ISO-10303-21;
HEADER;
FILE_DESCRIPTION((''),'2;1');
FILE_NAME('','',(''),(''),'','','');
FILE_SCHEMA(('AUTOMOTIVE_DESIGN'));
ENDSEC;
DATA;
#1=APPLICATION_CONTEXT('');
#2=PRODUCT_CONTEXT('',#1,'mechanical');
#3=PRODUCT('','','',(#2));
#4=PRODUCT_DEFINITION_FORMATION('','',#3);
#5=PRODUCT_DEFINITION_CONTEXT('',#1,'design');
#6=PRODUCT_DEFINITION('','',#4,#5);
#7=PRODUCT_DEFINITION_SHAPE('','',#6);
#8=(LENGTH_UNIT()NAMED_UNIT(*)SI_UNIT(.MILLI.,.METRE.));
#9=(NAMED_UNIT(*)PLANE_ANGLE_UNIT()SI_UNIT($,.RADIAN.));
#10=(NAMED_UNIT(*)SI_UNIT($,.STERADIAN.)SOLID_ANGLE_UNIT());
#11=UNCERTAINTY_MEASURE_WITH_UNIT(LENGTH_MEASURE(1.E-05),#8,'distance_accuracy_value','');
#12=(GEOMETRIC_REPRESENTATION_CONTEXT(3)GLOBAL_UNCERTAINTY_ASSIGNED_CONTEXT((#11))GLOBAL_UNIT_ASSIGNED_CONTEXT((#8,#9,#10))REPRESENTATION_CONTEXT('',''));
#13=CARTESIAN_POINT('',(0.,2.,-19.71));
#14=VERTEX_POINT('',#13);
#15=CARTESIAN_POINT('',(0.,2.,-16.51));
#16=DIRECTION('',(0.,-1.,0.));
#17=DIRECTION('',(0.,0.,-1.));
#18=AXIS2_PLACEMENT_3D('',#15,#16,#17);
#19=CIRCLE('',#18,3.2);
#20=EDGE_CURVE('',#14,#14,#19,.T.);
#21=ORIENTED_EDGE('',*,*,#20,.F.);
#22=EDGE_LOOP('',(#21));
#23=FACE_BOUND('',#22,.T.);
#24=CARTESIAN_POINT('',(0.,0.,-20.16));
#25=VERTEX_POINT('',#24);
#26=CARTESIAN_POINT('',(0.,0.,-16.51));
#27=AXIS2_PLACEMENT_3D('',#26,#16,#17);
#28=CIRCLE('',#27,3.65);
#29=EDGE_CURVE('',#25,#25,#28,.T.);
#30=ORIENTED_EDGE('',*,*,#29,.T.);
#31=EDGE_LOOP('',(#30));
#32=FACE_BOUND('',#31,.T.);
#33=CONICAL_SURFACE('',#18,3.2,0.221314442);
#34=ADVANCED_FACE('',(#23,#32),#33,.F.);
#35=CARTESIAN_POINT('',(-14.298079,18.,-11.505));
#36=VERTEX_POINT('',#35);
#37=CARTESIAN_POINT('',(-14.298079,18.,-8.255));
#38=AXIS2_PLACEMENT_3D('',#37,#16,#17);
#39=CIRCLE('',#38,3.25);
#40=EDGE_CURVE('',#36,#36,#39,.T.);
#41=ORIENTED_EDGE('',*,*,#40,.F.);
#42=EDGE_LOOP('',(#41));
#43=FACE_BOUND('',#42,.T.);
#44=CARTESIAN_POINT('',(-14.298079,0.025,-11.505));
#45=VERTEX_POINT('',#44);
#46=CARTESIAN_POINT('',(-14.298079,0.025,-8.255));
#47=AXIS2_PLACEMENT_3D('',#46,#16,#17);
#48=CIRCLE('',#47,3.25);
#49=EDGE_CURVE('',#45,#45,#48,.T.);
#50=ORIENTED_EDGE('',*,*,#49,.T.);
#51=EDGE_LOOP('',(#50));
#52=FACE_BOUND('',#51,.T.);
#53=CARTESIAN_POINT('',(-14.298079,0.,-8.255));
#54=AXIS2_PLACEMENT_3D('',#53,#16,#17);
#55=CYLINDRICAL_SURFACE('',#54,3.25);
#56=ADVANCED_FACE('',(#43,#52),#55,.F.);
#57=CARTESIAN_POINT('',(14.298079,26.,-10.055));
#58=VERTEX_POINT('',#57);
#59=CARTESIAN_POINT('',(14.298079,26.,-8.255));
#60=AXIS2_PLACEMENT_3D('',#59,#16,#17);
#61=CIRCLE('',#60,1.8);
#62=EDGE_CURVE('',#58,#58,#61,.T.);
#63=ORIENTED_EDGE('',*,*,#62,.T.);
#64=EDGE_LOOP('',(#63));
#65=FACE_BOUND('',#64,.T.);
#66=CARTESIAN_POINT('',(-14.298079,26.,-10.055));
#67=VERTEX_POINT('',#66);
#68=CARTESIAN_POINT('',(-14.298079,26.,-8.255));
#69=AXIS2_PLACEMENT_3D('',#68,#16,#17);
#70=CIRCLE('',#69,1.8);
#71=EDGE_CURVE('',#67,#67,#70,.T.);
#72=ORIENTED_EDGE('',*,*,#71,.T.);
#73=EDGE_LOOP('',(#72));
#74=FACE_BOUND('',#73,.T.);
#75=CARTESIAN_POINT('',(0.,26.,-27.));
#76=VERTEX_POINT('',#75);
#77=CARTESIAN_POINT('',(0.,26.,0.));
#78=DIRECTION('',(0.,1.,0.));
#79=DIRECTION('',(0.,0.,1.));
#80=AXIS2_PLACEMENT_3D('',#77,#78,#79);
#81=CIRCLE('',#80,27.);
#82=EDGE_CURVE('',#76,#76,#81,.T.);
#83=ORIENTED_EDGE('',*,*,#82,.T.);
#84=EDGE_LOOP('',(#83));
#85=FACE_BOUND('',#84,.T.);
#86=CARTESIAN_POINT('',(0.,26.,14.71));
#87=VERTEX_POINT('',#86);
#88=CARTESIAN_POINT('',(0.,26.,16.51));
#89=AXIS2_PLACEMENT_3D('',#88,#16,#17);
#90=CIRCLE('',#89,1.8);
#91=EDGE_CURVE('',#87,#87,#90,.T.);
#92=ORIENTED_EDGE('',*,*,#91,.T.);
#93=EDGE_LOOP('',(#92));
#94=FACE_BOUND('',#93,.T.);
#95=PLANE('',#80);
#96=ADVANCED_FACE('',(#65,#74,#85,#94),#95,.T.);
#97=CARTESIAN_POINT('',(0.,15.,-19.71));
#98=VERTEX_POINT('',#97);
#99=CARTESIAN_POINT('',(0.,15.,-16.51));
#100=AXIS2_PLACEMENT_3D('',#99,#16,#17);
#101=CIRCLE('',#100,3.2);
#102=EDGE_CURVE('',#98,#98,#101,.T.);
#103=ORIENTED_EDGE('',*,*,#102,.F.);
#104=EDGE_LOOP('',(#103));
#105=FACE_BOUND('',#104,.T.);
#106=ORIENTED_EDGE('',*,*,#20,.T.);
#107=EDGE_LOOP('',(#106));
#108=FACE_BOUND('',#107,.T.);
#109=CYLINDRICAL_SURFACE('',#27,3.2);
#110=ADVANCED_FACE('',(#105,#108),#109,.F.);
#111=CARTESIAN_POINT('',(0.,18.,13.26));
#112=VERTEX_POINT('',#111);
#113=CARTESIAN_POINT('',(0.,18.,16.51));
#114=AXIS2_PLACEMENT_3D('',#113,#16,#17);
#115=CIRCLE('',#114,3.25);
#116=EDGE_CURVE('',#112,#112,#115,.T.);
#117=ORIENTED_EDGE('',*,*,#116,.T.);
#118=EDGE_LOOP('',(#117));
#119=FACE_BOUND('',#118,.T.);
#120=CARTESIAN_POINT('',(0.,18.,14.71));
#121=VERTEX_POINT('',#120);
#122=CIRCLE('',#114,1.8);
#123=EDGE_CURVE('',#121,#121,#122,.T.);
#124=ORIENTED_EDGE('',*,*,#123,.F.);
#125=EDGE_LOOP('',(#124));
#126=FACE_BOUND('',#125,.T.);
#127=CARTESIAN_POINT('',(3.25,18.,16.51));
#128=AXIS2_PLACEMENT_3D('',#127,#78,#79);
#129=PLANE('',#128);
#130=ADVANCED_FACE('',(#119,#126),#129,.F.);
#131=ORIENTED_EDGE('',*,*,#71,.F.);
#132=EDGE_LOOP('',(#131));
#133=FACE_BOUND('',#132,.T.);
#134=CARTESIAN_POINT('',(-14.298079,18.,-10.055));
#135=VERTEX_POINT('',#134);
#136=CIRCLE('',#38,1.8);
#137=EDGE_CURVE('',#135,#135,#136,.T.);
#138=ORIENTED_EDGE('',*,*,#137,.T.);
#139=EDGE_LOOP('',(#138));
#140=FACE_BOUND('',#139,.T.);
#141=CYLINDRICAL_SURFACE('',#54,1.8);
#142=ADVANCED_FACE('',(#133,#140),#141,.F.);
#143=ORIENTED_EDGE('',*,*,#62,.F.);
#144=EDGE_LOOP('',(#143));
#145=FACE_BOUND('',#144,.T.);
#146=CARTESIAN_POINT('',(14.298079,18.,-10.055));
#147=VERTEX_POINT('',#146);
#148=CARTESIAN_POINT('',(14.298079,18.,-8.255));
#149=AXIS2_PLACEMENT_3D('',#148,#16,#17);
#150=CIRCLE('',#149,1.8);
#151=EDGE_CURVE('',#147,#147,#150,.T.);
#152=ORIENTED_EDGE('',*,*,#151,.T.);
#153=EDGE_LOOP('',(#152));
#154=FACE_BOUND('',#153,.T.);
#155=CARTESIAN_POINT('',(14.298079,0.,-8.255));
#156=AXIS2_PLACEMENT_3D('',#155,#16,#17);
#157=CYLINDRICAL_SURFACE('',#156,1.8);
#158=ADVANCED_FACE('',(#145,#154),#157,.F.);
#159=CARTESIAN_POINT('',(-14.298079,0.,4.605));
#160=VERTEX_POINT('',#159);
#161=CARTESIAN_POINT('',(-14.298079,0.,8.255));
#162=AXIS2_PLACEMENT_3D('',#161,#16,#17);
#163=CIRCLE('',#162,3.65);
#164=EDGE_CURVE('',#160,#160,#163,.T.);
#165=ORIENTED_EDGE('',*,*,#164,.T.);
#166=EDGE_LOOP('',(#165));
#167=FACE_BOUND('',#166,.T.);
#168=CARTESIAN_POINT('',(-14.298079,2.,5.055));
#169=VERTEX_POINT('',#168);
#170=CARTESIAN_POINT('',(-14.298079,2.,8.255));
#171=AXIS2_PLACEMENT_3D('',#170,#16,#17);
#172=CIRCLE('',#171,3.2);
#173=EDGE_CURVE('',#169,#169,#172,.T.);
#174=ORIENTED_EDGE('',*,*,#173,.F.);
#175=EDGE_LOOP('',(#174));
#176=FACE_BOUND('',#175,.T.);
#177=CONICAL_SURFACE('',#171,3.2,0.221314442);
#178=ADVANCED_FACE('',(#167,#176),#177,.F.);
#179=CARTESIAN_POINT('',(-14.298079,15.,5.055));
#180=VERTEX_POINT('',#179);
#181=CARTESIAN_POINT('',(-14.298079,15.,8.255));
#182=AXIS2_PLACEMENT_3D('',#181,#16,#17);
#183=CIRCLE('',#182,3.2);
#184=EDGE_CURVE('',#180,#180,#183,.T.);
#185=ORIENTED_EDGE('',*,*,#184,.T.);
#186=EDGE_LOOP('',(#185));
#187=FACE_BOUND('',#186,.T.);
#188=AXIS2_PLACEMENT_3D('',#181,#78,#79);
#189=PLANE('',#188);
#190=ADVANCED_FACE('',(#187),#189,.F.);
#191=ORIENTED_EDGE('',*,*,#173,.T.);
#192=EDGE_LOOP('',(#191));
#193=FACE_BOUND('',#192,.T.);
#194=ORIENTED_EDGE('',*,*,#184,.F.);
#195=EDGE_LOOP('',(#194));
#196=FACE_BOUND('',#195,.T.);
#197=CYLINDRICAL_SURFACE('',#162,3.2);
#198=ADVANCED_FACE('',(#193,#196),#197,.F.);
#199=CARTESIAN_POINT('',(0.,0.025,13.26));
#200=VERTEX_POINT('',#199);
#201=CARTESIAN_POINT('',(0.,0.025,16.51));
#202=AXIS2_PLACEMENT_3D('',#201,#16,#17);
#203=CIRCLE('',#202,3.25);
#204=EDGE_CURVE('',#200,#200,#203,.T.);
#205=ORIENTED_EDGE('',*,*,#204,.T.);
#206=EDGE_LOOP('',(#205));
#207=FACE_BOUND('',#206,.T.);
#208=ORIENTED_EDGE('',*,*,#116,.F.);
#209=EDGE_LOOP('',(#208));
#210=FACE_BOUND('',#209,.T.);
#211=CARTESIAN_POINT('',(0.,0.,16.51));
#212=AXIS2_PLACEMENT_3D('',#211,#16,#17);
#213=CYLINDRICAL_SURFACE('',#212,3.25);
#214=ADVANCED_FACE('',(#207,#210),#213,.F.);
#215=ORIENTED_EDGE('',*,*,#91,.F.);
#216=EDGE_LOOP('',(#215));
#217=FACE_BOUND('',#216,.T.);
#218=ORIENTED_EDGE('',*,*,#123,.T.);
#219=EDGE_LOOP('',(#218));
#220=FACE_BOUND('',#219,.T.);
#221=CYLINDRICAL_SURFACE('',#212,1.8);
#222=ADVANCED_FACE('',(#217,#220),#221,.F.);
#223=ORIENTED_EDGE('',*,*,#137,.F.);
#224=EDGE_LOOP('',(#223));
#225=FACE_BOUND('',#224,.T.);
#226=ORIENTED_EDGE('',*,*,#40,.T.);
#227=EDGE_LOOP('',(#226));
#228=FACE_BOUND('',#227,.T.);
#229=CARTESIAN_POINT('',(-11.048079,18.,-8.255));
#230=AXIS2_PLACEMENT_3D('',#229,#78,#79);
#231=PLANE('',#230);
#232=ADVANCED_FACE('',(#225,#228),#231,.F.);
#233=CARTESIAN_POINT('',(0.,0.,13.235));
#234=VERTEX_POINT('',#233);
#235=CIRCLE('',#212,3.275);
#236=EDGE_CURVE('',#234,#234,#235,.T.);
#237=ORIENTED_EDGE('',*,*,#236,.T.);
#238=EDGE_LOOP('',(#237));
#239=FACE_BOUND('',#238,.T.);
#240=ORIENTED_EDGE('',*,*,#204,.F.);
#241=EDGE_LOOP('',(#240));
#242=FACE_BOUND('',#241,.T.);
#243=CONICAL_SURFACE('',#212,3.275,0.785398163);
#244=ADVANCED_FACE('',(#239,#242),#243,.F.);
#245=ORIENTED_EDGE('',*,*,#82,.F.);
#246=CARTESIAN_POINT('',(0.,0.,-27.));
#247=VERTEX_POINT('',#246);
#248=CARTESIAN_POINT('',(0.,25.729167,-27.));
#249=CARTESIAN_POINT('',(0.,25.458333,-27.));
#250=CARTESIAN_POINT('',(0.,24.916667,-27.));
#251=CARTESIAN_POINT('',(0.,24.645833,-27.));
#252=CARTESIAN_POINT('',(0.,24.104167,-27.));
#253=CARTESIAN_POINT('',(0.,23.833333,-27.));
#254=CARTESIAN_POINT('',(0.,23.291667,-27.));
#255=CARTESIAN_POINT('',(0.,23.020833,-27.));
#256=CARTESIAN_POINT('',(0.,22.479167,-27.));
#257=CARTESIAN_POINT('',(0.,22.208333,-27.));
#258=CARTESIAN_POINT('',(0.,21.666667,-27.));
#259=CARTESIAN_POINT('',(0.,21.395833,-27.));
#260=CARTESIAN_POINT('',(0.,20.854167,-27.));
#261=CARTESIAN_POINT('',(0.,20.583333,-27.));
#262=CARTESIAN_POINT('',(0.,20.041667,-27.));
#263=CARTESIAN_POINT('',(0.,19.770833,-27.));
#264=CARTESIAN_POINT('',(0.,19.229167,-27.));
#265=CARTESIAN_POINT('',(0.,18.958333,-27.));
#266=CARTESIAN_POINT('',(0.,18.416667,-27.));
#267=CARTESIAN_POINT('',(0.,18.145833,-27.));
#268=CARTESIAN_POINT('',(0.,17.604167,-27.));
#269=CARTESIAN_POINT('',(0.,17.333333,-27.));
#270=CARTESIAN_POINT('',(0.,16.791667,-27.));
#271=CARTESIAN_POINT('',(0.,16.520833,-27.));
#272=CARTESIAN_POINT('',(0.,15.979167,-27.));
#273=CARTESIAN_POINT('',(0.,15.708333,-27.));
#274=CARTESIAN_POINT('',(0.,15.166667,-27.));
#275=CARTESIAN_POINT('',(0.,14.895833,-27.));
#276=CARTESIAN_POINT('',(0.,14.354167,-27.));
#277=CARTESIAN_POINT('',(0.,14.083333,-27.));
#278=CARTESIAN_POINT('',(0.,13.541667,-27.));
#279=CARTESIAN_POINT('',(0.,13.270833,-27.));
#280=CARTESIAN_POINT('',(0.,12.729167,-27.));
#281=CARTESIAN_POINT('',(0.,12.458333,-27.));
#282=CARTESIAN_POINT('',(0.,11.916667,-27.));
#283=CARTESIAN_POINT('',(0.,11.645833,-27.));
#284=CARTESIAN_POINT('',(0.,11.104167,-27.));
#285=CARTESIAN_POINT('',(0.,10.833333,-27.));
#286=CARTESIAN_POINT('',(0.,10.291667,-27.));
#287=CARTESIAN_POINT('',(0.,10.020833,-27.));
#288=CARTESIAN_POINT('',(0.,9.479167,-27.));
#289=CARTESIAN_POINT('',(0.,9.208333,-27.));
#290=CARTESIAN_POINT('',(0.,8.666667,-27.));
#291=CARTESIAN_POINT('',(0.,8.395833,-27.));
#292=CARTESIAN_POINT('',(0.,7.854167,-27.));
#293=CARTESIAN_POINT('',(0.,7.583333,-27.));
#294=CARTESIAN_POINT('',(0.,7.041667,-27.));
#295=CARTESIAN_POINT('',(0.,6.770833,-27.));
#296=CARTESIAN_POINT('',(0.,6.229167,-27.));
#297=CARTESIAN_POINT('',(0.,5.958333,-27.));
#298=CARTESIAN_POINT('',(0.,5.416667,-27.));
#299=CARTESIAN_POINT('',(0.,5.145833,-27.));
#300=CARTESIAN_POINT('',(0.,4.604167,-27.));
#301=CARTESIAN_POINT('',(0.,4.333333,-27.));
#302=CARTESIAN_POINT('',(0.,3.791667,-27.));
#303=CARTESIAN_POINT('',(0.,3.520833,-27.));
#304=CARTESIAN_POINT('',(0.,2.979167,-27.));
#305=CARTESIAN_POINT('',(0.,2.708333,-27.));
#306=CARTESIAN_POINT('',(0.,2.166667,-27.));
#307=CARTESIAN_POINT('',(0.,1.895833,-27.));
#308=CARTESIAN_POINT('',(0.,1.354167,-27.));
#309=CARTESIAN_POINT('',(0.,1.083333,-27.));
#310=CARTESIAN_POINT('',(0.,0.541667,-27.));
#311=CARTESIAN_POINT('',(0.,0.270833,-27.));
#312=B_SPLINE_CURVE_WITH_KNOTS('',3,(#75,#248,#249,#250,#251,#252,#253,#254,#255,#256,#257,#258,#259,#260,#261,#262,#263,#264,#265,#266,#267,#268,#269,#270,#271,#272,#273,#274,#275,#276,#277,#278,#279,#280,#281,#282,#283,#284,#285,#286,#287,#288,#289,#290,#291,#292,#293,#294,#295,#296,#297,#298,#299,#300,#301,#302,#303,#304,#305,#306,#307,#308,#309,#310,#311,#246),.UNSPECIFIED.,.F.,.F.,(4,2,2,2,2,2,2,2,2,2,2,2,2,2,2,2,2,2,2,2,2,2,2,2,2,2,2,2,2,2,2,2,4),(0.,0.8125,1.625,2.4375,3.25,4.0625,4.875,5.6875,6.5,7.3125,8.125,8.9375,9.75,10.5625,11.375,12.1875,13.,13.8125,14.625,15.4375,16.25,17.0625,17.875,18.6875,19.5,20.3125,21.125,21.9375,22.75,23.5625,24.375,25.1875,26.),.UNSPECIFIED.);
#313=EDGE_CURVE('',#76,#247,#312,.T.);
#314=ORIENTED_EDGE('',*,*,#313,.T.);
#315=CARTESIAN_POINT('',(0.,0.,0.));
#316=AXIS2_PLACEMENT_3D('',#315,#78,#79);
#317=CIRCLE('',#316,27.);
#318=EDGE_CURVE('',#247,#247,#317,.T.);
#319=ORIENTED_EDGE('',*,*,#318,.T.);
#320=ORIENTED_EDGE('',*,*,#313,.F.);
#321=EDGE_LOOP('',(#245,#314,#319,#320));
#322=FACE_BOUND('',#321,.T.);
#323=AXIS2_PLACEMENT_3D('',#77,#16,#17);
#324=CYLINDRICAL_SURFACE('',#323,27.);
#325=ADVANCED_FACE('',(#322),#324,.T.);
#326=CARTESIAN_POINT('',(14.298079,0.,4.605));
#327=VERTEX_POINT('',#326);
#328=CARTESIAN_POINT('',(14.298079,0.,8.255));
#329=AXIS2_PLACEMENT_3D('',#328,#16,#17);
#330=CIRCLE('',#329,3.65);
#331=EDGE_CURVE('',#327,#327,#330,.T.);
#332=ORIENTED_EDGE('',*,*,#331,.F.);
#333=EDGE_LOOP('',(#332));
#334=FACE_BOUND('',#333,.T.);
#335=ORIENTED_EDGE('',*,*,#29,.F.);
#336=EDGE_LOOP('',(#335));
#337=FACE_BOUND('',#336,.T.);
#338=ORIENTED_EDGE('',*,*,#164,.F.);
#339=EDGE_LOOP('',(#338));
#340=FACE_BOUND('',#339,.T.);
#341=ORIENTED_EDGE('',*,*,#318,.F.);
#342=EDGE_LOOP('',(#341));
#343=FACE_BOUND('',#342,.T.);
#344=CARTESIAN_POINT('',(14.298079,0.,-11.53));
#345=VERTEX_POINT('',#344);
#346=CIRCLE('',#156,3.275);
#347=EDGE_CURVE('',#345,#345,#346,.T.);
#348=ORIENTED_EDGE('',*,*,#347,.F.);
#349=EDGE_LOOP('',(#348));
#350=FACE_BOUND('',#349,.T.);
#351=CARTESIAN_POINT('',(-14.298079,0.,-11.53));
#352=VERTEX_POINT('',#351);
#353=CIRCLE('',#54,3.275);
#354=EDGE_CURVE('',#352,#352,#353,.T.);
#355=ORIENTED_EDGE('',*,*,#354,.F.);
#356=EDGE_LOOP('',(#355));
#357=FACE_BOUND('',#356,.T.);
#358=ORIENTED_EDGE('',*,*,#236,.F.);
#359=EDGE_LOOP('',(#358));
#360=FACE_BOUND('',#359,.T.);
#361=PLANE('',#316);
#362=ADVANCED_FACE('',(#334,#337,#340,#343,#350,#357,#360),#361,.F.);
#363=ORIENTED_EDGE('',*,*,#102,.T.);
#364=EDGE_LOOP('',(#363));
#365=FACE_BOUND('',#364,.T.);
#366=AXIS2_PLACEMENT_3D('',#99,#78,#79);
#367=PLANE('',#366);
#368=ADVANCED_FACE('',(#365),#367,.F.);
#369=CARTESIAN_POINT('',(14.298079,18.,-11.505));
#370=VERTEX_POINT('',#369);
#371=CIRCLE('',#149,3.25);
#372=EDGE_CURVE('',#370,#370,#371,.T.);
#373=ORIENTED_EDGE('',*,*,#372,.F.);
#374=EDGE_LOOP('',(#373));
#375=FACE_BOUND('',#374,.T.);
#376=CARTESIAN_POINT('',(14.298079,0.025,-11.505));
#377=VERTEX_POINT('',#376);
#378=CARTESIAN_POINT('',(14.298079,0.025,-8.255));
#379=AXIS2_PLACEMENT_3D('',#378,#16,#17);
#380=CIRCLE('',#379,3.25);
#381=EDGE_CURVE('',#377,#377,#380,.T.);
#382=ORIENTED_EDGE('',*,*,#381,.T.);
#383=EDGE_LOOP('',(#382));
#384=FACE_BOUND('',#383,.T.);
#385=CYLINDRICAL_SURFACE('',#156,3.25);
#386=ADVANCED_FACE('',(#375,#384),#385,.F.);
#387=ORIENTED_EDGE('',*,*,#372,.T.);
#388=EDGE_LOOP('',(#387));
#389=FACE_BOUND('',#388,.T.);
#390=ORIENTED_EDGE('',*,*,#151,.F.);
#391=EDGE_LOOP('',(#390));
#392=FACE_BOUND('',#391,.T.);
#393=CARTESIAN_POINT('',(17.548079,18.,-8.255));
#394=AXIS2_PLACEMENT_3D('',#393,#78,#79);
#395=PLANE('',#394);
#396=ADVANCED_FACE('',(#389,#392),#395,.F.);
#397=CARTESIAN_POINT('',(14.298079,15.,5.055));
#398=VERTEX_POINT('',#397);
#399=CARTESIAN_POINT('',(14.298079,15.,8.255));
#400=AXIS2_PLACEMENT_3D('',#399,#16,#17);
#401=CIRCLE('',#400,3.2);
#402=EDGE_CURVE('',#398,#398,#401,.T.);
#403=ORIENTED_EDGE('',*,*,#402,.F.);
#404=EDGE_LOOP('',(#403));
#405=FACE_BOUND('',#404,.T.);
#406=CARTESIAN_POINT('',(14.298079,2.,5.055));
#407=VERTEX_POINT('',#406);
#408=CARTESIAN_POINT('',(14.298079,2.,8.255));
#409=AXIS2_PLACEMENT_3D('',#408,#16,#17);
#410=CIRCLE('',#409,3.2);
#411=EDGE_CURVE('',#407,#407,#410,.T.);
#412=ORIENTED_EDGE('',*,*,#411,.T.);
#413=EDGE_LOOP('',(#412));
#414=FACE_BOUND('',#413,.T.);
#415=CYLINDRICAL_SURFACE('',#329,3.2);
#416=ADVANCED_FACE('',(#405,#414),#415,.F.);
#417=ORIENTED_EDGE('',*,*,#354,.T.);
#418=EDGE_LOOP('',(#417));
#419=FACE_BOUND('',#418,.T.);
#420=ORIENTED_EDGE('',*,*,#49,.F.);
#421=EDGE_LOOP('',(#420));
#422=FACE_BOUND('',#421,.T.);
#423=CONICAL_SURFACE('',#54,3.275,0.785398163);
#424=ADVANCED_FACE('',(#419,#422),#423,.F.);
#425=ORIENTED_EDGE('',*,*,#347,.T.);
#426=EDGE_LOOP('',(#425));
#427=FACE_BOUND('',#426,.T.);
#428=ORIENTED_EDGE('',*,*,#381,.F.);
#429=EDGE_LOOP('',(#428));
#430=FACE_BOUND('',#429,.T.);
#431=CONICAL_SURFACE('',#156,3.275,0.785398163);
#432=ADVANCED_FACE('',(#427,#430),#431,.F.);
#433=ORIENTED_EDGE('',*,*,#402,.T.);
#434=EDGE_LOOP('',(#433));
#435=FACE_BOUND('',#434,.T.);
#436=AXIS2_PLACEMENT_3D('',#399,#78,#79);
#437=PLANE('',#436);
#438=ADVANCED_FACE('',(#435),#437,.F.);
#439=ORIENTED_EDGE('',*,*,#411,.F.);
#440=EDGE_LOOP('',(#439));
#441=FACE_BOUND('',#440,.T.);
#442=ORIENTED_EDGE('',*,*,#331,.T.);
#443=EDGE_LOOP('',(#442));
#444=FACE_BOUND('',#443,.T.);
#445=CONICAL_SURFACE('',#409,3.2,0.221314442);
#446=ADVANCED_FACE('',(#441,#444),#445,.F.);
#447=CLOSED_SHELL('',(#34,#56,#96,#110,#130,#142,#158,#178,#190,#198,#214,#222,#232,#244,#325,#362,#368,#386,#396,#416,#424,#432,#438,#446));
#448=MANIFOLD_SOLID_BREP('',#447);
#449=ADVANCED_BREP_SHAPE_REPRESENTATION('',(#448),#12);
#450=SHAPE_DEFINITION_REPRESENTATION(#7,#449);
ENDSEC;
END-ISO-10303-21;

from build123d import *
from OCP.BRepFilletAPI import BRepFilletAPI_MakeChamfer

# Parameters (mm, degrees)
SKETCH2_R                     = 27
BOSS_EXTRUDE2_DEPTH           = 26
CBORE_FOR_M3_SHCS1_AT_2_COUNT = 2
CBORE_FOR_M3_SHCS1_AT_2_PITCH = 28.596158833
CBORE_FOR_M3_SHCS1_AT_3_COUNT = 2
CBORE_FOR_M3_SHCS1_AT_3_PITCH = 28.596158833
HOLE1_D                       = 6.4
HOLE1_DEPTH                   = 15
HOLE1_CBORE_D                 = 7.3
HOLE1_CBORE_DEPTH             = 2
CHAMFER1_SIZE                 = 2
CHAMFER1_SIZE_2               = 0.45


with BuildPart() as part:
    # Sketch2 → Boss-Extrude2 (new body)
    with BuildSketch(Plane(origin=(0, 0, 0), x_dir=(1, 0, 0), z_dir=(0, 1, 0))):
        with Locations(Location((0, 0, 0), (0, 0, 90))):
            Circle(SKETCH2_R)
    extrude(amount=BOSS_EXTRUDE2_DEPTH)

    # Sketch5 → CBORE for M3 SHCS1 (revolve, cut)
    with BuildSketch(Plane(origin=(0, 0, 16.51), x_dir=(0, 0, -1), z_dir=(1, 0, 0))):
        Polygon((0, 0), (0, 26), (1.8, 26), (1.8, 18), (3.25, 18), (3.25, 0.025), (3.275, 0), align=None)
    cbore_for_m3_shcs1 = revolve(axis=Axis((0, -6.35, 16.51), (0, 1, 0)), mode=Mode.SUBTRACT)

    # CBORE for M3 SHCS1 at 2: CBORE for M3 SHCS1 ×2
    with Locations(*[Vector(0.5000000000000012, 0, -0.8660254037844379) * (i * CBORE_FOR_M3_SHCS1_AT_2_PITCH) for i in range(1, CBORE_FOR_M3_SHCS1_AT_2_COUNT)]):
        add(cbore_for_m3_shcs1, mode=Mode.SUBTRACT)

    # CBORE for M3 SHCS1 at 3: CBORE for M3 SHCS1 ×2
    with Locations(*[Vector(-0.4999999999999978, 0, -0.8660254037844399) * (i * CBORE_FOR_M3_SHCS1_AT_3_PITCH) for i in range(1, CBORE_FOR_M3_SHCS1_AT_3_COUNT)]):
        add(cbore_for_m3_shcs1, mode=Mode.SUBTRACT)

    # Hole1
    with Locations(Plane(origin=(0, 0, 0), x_dir=(-1, 0, 0), z_dir=(0, -1, 0))):
        with Locations((14.298079416, -8.255), (0, 16.51), (-14.298079416, -8.255)):
            CounterBoreHole(HOLE1_D / 2, HOLE1_CBORE_D / 2, HOLE1_CBORE_DEPTH, depth=HOLE1_DEPTH)

    # Chamfer1
    chamfer1_edges_1 = [part.edges().sort_by_distance(p)[0] for p in [
        (17.948079416, 2, 8.255),
    ]]
    chamfer1_side_1 = [part.faces().sort_by_distance(p)[0] for p in [
        (17.948079416, 1.991, 8.255),
    ]]
    chamfer1_edges_2 = [part.edges().sort_by_distance(p)[0] for p in [
        (3.65, 2, -16.51),
    ]]
    chamfer1_side_2 = [part.faces().sort_by_distance(p)[0] for p in [
        (3.65, 1.991, -16.51),
    ]]
    chamfer1_edges_3 = [part.edges().sort_by_distance(p)[0] for p in [
        (-10.648079416, 2, 8.255),
    ]]
    chamfer1_side_3 = [part.faces().sort_by_distance(p)[0] for p in [
        (-10.648079416, 1.991, 8.255),
    ]]
    chamfer1 = BRepFilletAPI_MakeChamfer(part.part.solid().wrapped)
    for e in chamfer1_edges_1:
        chamfer1.Add(CHAMFER1_SIZE - 0.0001, CHAMFER1_SIZE_2 - 0.0001, e.wrapped, chamfer1_side_1[0].wrapped)
    for e in chamfer1_edges_2:
        chamfer1.Add(CHAMFER1_SIZE - 0.0001, CHAMFER1_SIZE_2 - 0.0001, e.wrapped, chamfer1_side_2[0].wrapped)
    for e in chamfer1_edges_3:
        chamfer1.Add(CHAMFER1_SIZE - 0.0001, CHAMFER1_SIZE_2 - 0.0001, e.wrapped, chamfer1_side_3[0].wrapped)
    add(Compound.cast(chamfer1.Shape()), mode=Mode.REPLACE)  # a hair under: the kernel refuses the full size


solid = part.part
